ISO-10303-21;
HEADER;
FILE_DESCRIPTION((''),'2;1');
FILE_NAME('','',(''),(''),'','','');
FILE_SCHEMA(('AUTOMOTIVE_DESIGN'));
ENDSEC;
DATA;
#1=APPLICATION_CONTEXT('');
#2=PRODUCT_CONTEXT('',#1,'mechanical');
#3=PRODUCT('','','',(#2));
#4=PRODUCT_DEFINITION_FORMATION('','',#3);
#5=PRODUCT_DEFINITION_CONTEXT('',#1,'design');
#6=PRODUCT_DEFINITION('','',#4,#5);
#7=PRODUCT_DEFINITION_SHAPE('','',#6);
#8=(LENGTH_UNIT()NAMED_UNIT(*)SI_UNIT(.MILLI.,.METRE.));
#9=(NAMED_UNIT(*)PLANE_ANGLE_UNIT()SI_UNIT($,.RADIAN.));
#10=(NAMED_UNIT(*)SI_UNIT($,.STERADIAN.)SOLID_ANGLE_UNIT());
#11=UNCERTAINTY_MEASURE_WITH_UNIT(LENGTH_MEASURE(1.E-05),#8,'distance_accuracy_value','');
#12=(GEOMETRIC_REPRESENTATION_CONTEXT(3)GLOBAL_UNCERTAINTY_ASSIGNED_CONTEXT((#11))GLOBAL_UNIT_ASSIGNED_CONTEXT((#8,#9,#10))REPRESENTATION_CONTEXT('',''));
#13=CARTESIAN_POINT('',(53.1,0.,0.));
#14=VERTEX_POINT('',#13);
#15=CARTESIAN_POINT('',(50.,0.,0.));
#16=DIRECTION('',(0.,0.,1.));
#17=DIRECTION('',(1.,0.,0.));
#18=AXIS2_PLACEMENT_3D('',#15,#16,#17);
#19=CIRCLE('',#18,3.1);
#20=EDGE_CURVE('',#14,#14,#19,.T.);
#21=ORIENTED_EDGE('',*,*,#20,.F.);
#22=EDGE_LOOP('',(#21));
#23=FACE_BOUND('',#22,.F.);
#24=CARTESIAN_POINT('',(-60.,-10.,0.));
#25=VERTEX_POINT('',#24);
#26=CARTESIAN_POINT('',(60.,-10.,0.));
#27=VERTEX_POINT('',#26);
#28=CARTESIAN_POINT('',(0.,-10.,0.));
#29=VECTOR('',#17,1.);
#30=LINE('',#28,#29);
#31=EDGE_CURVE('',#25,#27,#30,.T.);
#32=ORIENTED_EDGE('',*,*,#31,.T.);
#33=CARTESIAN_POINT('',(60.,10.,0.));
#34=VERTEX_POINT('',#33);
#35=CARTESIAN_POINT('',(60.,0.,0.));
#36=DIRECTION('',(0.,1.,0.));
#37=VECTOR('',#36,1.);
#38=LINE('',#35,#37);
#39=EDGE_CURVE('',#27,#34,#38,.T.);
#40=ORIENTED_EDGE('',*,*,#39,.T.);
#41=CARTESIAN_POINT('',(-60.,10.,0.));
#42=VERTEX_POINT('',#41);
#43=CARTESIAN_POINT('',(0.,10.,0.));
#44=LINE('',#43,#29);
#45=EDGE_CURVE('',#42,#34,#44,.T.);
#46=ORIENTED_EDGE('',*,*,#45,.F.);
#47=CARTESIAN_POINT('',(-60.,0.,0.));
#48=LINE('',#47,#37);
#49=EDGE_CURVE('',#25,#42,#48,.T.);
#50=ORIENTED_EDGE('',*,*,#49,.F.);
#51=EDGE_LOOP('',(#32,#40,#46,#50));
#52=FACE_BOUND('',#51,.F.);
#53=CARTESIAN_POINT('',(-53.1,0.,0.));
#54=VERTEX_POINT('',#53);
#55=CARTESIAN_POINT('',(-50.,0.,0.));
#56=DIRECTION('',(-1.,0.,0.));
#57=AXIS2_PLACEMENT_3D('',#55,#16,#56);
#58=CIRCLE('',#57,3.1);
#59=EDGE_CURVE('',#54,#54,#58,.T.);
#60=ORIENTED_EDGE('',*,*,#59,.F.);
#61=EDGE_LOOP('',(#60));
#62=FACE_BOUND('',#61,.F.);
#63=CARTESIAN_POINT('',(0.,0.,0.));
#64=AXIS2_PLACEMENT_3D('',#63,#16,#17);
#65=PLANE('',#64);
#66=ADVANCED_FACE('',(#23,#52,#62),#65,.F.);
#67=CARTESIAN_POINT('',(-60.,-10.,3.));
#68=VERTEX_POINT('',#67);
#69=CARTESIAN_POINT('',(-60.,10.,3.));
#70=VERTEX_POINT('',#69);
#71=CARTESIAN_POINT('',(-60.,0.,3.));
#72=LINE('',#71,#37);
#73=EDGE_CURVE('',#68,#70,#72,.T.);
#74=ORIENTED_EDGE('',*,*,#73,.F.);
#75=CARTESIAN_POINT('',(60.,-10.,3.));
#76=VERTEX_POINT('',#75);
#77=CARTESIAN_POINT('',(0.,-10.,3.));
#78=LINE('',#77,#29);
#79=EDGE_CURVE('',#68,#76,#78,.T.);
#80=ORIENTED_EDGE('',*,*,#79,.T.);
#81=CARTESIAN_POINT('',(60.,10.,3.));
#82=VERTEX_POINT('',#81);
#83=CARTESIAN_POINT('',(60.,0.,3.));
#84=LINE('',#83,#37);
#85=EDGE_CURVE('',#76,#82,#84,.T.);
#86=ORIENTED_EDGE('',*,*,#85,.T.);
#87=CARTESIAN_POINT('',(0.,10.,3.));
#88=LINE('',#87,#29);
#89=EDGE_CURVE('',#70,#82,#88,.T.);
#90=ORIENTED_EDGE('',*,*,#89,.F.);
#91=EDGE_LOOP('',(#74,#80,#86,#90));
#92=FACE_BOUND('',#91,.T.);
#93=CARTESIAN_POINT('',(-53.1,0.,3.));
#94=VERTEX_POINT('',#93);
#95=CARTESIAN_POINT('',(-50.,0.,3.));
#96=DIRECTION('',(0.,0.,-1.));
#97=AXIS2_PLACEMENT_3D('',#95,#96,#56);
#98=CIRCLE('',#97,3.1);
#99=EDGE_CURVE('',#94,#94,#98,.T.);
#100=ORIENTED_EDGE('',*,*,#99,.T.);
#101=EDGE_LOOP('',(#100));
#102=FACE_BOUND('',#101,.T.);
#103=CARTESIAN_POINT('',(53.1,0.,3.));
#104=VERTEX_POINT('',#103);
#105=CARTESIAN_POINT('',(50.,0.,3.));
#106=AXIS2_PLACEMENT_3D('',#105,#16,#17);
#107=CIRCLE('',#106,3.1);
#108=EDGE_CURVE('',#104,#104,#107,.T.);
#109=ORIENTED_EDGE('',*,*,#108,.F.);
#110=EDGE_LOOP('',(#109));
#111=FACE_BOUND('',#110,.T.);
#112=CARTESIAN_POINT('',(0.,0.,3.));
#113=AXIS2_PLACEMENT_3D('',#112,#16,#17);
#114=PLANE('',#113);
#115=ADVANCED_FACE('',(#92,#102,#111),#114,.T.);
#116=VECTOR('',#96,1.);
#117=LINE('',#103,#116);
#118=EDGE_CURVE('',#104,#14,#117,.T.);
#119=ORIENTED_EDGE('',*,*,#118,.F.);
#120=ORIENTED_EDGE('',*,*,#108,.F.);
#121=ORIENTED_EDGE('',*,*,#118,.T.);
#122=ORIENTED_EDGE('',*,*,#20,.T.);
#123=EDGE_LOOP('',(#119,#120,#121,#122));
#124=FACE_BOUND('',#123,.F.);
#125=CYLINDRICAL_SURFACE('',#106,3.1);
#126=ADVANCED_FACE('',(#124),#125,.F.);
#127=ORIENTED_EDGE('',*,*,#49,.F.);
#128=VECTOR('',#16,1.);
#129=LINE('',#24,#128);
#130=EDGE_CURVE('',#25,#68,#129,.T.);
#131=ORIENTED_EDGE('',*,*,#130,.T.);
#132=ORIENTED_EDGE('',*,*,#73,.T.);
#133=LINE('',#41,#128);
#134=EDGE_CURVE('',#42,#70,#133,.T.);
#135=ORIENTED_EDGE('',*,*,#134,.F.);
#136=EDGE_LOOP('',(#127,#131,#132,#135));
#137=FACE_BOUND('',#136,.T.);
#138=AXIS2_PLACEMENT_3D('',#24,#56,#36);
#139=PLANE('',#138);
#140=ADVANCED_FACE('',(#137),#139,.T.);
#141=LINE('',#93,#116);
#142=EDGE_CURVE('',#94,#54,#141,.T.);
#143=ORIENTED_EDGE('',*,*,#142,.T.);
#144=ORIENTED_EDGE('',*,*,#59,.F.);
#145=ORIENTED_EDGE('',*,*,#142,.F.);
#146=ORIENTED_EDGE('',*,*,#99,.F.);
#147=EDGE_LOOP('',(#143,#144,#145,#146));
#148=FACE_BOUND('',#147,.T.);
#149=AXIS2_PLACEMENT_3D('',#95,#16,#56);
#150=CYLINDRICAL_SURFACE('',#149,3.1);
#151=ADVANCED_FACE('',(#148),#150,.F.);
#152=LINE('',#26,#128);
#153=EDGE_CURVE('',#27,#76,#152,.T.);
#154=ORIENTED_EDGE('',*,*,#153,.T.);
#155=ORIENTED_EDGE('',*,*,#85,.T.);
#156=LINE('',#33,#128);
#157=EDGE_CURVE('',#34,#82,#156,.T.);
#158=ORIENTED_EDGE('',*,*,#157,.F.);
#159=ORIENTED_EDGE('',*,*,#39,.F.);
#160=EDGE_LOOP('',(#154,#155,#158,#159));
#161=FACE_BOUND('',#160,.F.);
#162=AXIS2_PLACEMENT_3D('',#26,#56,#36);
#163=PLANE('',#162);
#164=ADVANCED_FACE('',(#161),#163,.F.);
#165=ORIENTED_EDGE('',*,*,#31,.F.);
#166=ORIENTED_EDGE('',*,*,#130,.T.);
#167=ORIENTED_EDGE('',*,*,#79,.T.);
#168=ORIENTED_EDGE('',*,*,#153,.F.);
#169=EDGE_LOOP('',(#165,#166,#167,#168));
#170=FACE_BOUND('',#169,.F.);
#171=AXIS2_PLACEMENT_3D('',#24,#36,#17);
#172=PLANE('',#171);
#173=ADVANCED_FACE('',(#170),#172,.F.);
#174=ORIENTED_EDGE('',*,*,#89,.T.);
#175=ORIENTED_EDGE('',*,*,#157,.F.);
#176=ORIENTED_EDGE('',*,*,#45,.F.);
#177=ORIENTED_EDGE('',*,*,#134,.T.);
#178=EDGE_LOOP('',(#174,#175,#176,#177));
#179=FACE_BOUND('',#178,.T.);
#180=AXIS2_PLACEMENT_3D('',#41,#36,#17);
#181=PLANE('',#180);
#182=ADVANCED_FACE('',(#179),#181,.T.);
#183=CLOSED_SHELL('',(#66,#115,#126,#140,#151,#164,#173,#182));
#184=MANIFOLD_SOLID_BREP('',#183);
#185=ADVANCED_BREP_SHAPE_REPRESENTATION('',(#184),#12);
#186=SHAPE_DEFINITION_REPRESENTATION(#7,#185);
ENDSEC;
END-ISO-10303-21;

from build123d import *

# Parameters (mm, degrees)
F0_W     = 120
F0_H     = 20
F1_DEPTH = 3
F2_R     = 3.1
F3_DEPTH = 25


# Not quite as in the source:
# - a pattern or mirror of a feature is missing from the dataset's text; its kind, count and spacing are read off the source's solid


with BuildPart() as f1:
    # F0 (on Top) → F1 (new body)
    with BuildSketch(Plane.XY):
        Rectangle(F0_W, F0_H)
    extrude(amount=F1_DEPTH)

    # F2 (on face) → F3 (cut)
    with BuildSketch(Plane.XY.offset(3)):
        with Locations((50, 0)):
            Circle(F2_R)
    f3 = extrude(amount=-F3_DEPTH, mode=Mode.SUBTRACT)

    # F3_copies: F3 across plane
    add(f3.mirror(Plane(origin=(0, 0, 0), x_dir=(0, 0, -1), z_dir=(-1, 0, 0))), mode=Mode.SUBTRACT)


solid = f1.part
